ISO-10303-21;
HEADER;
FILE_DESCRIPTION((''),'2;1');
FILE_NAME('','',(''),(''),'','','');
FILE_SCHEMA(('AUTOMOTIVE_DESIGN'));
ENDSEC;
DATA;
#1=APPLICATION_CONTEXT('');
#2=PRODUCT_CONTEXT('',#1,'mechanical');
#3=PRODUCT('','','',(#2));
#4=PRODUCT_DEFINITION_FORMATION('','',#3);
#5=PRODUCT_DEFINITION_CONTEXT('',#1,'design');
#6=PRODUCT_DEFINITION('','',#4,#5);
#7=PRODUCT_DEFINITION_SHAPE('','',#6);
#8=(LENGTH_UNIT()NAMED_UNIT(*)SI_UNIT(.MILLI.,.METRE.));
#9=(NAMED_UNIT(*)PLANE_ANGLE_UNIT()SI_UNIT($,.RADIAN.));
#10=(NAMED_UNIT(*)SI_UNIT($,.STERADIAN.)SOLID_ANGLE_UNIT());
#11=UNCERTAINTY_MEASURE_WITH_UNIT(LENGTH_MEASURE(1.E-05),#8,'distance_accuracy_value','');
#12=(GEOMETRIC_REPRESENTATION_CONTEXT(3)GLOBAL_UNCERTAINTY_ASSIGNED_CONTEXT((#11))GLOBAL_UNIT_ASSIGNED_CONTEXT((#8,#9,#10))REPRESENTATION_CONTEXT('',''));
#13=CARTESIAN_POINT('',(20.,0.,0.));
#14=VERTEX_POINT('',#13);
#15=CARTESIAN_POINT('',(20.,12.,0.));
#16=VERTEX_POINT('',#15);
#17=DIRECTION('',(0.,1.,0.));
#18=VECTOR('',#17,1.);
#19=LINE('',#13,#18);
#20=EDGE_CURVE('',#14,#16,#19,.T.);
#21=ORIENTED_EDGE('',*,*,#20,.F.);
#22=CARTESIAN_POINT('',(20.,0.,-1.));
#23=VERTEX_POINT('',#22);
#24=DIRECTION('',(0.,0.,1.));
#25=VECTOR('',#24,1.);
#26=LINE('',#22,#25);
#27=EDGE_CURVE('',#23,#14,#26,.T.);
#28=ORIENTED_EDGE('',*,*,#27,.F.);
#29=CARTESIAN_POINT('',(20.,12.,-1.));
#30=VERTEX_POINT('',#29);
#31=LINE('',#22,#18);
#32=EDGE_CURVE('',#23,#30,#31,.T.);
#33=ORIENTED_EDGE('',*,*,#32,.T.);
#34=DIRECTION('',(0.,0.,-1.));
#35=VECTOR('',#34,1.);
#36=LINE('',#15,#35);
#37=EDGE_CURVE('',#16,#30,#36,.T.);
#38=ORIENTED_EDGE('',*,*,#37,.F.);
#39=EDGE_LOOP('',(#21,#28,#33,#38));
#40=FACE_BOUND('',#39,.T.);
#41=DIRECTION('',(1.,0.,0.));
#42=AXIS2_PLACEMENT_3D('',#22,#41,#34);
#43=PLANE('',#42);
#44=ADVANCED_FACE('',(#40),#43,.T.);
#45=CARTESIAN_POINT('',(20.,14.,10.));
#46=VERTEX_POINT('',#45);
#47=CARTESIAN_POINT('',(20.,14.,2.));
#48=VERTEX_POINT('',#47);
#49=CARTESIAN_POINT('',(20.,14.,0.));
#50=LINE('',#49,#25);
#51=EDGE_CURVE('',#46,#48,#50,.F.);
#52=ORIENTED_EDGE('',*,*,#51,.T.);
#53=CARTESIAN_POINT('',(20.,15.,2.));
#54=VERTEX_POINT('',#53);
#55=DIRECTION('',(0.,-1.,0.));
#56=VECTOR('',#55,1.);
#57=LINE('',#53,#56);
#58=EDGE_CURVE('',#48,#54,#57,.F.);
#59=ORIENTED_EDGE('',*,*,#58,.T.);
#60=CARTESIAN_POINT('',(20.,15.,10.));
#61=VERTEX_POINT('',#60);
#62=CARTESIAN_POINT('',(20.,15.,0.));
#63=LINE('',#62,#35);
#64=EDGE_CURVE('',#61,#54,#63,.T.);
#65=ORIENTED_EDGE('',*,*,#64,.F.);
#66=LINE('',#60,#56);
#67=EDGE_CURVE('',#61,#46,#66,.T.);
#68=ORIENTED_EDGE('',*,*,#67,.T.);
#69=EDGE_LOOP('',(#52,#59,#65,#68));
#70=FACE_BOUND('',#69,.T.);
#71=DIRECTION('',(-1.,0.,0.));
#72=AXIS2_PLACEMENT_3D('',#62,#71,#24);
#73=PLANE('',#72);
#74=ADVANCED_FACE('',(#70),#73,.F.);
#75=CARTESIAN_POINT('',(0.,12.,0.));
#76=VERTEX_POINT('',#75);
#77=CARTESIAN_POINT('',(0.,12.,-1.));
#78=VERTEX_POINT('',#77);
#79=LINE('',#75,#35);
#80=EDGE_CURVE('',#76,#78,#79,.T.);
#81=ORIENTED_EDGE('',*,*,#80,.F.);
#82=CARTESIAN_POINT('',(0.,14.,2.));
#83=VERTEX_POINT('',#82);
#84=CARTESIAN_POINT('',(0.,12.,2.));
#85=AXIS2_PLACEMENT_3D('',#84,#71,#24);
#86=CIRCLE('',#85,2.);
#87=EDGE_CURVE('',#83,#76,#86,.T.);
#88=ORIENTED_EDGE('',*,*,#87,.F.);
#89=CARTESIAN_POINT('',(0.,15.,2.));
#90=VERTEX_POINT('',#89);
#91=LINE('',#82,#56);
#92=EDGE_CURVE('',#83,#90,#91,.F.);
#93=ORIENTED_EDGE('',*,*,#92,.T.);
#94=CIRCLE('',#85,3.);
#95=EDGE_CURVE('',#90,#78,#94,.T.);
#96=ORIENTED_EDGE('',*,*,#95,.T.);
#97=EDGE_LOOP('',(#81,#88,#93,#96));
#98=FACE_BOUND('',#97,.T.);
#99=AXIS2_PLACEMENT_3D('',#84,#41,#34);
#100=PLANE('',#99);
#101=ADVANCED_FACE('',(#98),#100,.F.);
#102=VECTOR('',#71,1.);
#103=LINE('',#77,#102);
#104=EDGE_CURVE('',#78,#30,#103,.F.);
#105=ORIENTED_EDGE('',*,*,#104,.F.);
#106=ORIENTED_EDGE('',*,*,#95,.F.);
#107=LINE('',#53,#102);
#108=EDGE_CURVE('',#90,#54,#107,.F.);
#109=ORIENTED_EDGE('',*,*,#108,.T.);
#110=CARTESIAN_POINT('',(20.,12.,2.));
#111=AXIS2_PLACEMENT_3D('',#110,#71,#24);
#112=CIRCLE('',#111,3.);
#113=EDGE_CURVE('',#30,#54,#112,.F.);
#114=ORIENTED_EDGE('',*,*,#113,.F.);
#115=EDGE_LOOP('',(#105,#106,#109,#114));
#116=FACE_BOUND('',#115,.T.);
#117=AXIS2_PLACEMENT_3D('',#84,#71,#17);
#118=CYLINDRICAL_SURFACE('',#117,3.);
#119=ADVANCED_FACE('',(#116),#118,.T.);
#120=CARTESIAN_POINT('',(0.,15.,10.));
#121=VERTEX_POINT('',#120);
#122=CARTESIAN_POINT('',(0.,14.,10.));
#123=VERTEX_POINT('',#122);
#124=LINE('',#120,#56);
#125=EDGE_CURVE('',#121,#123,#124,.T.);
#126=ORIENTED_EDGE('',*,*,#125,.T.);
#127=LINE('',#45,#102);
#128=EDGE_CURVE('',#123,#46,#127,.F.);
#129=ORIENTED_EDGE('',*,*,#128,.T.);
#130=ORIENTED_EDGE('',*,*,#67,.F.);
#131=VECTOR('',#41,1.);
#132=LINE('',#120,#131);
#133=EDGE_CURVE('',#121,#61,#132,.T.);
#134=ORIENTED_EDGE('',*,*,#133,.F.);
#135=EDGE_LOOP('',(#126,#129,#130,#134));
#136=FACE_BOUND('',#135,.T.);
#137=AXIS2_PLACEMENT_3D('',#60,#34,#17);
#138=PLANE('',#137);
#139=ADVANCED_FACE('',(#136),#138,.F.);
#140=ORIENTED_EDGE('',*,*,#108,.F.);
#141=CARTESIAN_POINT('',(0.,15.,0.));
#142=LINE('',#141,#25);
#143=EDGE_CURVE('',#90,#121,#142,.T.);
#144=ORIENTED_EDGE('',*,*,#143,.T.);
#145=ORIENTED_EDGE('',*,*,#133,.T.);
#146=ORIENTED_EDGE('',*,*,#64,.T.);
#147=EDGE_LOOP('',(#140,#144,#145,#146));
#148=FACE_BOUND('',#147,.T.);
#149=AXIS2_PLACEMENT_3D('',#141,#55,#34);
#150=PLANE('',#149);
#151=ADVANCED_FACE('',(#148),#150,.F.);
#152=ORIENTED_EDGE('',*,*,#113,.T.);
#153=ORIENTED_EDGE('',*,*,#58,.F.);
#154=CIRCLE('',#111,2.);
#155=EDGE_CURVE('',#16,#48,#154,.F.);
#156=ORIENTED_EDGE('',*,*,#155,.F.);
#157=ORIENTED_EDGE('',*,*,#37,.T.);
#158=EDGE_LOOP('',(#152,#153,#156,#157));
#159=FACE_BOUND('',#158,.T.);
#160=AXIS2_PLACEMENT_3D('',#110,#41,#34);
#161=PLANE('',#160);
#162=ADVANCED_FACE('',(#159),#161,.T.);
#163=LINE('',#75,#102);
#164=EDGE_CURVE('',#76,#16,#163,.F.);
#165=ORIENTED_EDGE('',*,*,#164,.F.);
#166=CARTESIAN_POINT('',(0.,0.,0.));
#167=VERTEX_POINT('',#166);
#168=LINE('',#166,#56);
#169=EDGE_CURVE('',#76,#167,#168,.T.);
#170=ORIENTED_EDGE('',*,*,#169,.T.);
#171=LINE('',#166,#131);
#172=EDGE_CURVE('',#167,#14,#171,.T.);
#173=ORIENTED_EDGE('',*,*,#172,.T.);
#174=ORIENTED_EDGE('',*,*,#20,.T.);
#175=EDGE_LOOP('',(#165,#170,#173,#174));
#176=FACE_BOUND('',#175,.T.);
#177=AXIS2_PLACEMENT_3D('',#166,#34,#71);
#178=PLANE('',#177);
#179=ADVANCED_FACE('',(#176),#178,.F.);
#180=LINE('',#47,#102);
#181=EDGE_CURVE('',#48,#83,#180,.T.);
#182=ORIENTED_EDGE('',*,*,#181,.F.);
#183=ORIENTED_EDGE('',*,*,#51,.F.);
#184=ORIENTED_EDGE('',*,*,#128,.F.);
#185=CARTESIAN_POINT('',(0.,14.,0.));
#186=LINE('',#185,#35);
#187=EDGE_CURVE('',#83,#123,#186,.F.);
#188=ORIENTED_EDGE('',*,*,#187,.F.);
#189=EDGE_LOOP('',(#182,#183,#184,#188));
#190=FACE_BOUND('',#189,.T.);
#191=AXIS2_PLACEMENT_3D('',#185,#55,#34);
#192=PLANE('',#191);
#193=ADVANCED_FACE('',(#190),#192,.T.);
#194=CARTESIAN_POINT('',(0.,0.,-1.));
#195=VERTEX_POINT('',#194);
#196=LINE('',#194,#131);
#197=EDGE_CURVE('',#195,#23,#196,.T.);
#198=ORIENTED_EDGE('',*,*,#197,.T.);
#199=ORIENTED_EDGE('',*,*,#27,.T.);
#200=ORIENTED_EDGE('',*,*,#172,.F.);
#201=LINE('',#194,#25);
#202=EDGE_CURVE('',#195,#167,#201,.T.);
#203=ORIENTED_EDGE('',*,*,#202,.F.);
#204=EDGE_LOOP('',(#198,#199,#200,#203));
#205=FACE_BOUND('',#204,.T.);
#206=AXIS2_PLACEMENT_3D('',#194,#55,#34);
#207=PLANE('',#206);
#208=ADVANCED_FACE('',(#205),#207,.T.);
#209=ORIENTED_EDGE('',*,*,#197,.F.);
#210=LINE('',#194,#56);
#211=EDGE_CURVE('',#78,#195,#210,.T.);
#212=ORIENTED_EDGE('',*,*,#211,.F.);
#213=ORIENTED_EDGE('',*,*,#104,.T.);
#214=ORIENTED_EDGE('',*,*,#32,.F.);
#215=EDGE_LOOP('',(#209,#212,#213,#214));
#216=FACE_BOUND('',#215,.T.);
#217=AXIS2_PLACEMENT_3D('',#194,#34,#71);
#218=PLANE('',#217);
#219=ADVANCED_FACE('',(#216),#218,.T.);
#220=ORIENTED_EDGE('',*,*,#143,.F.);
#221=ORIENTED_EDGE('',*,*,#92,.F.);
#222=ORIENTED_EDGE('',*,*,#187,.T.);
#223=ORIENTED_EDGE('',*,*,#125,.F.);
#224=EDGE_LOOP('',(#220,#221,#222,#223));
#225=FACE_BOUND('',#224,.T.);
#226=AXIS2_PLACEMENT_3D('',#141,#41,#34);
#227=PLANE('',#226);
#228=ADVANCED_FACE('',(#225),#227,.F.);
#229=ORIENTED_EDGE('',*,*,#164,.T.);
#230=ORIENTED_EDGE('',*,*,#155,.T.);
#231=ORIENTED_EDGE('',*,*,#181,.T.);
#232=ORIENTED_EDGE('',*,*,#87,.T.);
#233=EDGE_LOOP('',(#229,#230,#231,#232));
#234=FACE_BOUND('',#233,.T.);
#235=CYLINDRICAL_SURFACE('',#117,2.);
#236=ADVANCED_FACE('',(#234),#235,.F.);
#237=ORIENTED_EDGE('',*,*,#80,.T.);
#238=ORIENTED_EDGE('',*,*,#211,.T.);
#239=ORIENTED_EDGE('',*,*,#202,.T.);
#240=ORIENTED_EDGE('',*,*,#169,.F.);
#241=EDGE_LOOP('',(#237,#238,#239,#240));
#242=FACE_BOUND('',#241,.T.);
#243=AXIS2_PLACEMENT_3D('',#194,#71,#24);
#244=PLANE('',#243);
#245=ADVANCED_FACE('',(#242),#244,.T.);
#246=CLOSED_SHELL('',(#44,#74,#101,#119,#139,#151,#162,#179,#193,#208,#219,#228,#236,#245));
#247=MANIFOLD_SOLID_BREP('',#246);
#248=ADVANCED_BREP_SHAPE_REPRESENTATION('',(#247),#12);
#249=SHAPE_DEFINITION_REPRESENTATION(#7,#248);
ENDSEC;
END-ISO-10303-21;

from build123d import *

# Parameters (mm, degrees)
SKETCH_1_W            = 20
SKETCH_1_H            = 10
BASEPLATE_DEPTH       = 1
EDGEFLANGE_DEPTH      = 20
EDGEFLANGE_FLAT_DEPTH = 1


# Sheet-metal steps are written as plain solids
with BuildPart() as part:
    # BasePlate: sheet metal written as solids
    # Sketch 1 → BasePlate (new body)
    with BuildSketch(Plane.XY):
        with Locations((10, 5)):
            Rectangle(SKETCH_1_W, SKETCH_1_H)
    extrude(amount=-BASEPLATE_DEPTH)

    # EdgeFlange: sheet metal written as solids
    # EdgeFlange bend section (on a plane across the edge) → EdgeFlange (add)
    with BuildSketch(Plane(origin=(20, 15, 0), x_dir=(0, -1, 0), z_dir=(-1, 0, 0))):
        with BuildLine():
            Line((0, 2), (1, 2))
            ThreePointArc((1, 2), (1.585786438, 0.585786438), (3, 0))
            Line((3, 0), (5, 0))
            Line((5, 0), (5, -1))
            Line((5, -1), (3, -1))
            ThreePointArc((3, -1), (0.878679656, -0.121320344), (0, 2))
        make_face()
    extrude(amount=EDGEFLANGE_DEPTH)

    # EdgeFlange profile (on flange) → EdgeFlange flat (add)
    with BuildSketch(Plane(origin=(0, 15, 0), x_dir=(-1, 0, 0), z_dir=(0, 1, 0))):
        Polygon((-20, 10), (-20, 2), (0, 2), (0, 10), (-2, 10), (-18, 10), align=None)
    extrude(amount=-EDGEFLANGE_FLAT_DEPTH)


solid = part.part
